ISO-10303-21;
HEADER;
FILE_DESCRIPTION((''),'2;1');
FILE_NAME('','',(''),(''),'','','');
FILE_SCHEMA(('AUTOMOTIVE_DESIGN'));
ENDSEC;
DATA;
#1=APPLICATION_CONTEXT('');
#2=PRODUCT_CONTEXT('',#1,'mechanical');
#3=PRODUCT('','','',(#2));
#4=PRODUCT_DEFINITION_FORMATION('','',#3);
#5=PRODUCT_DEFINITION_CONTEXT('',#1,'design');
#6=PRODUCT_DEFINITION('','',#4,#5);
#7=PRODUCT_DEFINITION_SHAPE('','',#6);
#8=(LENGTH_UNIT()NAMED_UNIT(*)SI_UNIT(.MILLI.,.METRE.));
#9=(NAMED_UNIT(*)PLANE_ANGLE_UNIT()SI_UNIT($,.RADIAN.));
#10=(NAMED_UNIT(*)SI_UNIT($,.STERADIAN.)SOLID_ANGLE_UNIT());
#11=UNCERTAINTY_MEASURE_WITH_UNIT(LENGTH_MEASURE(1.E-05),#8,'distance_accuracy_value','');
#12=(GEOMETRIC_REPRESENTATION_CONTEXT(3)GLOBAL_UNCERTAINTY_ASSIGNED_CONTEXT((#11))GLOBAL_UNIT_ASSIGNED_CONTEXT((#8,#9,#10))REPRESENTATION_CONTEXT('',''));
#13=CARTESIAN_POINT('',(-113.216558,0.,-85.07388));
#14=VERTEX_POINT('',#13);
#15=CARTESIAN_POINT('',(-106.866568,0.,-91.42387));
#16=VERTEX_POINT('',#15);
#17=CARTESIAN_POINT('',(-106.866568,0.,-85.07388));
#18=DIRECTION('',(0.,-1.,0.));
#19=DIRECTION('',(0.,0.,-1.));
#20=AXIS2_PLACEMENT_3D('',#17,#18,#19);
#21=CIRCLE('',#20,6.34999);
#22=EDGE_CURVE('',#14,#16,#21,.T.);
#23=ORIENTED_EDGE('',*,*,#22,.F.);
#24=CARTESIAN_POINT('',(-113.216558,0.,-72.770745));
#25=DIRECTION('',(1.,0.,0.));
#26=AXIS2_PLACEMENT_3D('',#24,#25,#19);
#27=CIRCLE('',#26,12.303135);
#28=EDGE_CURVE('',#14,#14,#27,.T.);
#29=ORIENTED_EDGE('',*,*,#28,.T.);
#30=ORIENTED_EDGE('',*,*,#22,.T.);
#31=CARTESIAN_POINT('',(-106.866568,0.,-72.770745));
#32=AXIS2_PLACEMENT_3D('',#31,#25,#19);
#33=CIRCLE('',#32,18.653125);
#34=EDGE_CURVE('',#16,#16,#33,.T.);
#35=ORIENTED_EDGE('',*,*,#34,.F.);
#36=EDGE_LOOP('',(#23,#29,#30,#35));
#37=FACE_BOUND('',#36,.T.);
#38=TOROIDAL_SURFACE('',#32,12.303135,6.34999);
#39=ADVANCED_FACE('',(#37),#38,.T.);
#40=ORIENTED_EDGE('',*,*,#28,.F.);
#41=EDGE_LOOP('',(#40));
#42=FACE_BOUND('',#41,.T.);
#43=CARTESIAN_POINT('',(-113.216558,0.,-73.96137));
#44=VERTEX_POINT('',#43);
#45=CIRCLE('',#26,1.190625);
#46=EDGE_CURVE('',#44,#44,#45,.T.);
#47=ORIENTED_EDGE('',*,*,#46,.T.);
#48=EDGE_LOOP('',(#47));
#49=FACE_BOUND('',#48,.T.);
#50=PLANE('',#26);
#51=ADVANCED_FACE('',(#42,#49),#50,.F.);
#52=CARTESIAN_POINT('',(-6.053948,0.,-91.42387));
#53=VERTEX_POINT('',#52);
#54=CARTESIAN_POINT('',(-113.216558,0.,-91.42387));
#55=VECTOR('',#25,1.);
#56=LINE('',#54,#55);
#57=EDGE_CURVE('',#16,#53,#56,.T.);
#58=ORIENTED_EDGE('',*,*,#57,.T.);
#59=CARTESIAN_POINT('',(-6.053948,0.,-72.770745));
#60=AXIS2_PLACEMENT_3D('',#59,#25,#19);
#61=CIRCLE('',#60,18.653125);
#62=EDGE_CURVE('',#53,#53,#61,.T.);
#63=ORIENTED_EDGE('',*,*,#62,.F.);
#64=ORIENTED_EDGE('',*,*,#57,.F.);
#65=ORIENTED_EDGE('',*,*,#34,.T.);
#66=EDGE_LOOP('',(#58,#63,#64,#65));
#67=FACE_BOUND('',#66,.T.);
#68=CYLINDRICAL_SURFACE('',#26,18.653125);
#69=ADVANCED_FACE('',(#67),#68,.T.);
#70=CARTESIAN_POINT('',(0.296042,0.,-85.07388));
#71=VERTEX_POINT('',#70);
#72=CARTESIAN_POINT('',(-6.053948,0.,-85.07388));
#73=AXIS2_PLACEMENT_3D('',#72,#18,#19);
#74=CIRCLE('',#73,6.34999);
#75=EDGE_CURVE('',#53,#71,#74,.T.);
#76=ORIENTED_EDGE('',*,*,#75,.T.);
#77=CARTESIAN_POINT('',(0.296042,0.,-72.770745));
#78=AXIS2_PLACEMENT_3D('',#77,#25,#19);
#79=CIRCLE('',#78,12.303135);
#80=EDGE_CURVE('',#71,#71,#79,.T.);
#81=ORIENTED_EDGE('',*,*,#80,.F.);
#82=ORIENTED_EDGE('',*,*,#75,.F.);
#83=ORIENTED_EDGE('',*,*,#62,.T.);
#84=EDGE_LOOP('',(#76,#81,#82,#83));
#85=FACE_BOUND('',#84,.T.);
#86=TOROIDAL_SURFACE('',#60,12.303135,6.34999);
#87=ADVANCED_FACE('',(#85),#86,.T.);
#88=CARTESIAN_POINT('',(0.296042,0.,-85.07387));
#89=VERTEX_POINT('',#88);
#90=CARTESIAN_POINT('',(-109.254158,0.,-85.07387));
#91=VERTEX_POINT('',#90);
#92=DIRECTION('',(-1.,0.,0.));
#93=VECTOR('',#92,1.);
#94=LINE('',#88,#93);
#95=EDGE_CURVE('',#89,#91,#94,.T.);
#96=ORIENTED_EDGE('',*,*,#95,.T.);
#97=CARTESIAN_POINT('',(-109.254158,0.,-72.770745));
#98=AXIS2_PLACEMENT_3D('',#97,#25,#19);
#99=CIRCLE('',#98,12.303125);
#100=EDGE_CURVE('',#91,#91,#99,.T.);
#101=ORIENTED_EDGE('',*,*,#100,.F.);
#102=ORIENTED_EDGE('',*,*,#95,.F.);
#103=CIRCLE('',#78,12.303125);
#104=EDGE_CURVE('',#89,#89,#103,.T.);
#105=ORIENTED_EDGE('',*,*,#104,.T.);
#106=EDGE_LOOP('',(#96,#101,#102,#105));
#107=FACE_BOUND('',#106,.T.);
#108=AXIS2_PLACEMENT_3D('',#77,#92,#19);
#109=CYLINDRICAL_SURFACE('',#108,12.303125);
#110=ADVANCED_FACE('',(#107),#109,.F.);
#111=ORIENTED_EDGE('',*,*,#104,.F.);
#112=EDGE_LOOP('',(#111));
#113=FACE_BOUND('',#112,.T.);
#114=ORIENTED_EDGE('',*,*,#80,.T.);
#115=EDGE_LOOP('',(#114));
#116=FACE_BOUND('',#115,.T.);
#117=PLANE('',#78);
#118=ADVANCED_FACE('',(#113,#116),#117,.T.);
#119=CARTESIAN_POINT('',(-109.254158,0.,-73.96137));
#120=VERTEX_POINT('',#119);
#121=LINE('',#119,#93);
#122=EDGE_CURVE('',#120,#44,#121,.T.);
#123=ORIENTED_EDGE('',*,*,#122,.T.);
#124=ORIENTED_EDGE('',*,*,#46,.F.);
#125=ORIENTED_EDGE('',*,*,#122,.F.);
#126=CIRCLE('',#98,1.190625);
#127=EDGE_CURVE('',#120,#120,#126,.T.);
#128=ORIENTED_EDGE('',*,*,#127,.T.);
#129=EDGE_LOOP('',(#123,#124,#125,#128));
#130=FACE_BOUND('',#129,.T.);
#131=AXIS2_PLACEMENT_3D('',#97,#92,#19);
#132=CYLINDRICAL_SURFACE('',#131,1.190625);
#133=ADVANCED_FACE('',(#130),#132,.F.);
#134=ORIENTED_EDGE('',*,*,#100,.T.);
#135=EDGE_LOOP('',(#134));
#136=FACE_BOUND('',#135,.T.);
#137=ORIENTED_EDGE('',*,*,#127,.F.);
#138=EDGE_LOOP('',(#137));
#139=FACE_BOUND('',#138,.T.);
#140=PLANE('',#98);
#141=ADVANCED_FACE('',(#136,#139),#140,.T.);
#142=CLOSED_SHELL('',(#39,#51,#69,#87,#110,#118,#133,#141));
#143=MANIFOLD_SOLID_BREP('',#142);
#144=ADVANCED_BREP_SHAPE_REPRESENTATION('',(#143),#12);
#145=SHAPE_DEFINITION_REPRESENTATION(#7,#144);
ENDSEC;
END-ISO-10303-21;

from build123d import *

# Parameters (mm, degrees)
F2_R = 6.34999


# Not quite as in the source:
# - a fillet or chamfer is up to 0.001 mm smaller than in the source, because OpenCascade refuses the exact size


with BuildPart() as f1:
    # F0 (on Front) → F1 (revolve)
    with BuildSketch(Plane.XZ):
        Polygon((-109.2541576196, -73.9613701678), (-113.2165576196, -73.9613701678), (-113.2165576196, -91.4238701678), (0.2960423804, -91.4238701678), (0.2960423804, -85.0738701678), (-109.2541576196, -85.0738701678), align=None)
    revolve(axis=Axis((-12.7451103181, 0, -72.7707451678), (1, 0, 0)))

    # F2 (radius 6.35 in the source; OpenCascade refuses exactly that, so slightly less here)
    f2_edges = [f1.edges().sort_by_distance(p)[0] for p in [
        (0.296042, 0, -54.11762),
        (-113.216558, 0, -54.11762),
    ]]
    fillet(f2_edges, radius=F2_R)


solid = f1.part
